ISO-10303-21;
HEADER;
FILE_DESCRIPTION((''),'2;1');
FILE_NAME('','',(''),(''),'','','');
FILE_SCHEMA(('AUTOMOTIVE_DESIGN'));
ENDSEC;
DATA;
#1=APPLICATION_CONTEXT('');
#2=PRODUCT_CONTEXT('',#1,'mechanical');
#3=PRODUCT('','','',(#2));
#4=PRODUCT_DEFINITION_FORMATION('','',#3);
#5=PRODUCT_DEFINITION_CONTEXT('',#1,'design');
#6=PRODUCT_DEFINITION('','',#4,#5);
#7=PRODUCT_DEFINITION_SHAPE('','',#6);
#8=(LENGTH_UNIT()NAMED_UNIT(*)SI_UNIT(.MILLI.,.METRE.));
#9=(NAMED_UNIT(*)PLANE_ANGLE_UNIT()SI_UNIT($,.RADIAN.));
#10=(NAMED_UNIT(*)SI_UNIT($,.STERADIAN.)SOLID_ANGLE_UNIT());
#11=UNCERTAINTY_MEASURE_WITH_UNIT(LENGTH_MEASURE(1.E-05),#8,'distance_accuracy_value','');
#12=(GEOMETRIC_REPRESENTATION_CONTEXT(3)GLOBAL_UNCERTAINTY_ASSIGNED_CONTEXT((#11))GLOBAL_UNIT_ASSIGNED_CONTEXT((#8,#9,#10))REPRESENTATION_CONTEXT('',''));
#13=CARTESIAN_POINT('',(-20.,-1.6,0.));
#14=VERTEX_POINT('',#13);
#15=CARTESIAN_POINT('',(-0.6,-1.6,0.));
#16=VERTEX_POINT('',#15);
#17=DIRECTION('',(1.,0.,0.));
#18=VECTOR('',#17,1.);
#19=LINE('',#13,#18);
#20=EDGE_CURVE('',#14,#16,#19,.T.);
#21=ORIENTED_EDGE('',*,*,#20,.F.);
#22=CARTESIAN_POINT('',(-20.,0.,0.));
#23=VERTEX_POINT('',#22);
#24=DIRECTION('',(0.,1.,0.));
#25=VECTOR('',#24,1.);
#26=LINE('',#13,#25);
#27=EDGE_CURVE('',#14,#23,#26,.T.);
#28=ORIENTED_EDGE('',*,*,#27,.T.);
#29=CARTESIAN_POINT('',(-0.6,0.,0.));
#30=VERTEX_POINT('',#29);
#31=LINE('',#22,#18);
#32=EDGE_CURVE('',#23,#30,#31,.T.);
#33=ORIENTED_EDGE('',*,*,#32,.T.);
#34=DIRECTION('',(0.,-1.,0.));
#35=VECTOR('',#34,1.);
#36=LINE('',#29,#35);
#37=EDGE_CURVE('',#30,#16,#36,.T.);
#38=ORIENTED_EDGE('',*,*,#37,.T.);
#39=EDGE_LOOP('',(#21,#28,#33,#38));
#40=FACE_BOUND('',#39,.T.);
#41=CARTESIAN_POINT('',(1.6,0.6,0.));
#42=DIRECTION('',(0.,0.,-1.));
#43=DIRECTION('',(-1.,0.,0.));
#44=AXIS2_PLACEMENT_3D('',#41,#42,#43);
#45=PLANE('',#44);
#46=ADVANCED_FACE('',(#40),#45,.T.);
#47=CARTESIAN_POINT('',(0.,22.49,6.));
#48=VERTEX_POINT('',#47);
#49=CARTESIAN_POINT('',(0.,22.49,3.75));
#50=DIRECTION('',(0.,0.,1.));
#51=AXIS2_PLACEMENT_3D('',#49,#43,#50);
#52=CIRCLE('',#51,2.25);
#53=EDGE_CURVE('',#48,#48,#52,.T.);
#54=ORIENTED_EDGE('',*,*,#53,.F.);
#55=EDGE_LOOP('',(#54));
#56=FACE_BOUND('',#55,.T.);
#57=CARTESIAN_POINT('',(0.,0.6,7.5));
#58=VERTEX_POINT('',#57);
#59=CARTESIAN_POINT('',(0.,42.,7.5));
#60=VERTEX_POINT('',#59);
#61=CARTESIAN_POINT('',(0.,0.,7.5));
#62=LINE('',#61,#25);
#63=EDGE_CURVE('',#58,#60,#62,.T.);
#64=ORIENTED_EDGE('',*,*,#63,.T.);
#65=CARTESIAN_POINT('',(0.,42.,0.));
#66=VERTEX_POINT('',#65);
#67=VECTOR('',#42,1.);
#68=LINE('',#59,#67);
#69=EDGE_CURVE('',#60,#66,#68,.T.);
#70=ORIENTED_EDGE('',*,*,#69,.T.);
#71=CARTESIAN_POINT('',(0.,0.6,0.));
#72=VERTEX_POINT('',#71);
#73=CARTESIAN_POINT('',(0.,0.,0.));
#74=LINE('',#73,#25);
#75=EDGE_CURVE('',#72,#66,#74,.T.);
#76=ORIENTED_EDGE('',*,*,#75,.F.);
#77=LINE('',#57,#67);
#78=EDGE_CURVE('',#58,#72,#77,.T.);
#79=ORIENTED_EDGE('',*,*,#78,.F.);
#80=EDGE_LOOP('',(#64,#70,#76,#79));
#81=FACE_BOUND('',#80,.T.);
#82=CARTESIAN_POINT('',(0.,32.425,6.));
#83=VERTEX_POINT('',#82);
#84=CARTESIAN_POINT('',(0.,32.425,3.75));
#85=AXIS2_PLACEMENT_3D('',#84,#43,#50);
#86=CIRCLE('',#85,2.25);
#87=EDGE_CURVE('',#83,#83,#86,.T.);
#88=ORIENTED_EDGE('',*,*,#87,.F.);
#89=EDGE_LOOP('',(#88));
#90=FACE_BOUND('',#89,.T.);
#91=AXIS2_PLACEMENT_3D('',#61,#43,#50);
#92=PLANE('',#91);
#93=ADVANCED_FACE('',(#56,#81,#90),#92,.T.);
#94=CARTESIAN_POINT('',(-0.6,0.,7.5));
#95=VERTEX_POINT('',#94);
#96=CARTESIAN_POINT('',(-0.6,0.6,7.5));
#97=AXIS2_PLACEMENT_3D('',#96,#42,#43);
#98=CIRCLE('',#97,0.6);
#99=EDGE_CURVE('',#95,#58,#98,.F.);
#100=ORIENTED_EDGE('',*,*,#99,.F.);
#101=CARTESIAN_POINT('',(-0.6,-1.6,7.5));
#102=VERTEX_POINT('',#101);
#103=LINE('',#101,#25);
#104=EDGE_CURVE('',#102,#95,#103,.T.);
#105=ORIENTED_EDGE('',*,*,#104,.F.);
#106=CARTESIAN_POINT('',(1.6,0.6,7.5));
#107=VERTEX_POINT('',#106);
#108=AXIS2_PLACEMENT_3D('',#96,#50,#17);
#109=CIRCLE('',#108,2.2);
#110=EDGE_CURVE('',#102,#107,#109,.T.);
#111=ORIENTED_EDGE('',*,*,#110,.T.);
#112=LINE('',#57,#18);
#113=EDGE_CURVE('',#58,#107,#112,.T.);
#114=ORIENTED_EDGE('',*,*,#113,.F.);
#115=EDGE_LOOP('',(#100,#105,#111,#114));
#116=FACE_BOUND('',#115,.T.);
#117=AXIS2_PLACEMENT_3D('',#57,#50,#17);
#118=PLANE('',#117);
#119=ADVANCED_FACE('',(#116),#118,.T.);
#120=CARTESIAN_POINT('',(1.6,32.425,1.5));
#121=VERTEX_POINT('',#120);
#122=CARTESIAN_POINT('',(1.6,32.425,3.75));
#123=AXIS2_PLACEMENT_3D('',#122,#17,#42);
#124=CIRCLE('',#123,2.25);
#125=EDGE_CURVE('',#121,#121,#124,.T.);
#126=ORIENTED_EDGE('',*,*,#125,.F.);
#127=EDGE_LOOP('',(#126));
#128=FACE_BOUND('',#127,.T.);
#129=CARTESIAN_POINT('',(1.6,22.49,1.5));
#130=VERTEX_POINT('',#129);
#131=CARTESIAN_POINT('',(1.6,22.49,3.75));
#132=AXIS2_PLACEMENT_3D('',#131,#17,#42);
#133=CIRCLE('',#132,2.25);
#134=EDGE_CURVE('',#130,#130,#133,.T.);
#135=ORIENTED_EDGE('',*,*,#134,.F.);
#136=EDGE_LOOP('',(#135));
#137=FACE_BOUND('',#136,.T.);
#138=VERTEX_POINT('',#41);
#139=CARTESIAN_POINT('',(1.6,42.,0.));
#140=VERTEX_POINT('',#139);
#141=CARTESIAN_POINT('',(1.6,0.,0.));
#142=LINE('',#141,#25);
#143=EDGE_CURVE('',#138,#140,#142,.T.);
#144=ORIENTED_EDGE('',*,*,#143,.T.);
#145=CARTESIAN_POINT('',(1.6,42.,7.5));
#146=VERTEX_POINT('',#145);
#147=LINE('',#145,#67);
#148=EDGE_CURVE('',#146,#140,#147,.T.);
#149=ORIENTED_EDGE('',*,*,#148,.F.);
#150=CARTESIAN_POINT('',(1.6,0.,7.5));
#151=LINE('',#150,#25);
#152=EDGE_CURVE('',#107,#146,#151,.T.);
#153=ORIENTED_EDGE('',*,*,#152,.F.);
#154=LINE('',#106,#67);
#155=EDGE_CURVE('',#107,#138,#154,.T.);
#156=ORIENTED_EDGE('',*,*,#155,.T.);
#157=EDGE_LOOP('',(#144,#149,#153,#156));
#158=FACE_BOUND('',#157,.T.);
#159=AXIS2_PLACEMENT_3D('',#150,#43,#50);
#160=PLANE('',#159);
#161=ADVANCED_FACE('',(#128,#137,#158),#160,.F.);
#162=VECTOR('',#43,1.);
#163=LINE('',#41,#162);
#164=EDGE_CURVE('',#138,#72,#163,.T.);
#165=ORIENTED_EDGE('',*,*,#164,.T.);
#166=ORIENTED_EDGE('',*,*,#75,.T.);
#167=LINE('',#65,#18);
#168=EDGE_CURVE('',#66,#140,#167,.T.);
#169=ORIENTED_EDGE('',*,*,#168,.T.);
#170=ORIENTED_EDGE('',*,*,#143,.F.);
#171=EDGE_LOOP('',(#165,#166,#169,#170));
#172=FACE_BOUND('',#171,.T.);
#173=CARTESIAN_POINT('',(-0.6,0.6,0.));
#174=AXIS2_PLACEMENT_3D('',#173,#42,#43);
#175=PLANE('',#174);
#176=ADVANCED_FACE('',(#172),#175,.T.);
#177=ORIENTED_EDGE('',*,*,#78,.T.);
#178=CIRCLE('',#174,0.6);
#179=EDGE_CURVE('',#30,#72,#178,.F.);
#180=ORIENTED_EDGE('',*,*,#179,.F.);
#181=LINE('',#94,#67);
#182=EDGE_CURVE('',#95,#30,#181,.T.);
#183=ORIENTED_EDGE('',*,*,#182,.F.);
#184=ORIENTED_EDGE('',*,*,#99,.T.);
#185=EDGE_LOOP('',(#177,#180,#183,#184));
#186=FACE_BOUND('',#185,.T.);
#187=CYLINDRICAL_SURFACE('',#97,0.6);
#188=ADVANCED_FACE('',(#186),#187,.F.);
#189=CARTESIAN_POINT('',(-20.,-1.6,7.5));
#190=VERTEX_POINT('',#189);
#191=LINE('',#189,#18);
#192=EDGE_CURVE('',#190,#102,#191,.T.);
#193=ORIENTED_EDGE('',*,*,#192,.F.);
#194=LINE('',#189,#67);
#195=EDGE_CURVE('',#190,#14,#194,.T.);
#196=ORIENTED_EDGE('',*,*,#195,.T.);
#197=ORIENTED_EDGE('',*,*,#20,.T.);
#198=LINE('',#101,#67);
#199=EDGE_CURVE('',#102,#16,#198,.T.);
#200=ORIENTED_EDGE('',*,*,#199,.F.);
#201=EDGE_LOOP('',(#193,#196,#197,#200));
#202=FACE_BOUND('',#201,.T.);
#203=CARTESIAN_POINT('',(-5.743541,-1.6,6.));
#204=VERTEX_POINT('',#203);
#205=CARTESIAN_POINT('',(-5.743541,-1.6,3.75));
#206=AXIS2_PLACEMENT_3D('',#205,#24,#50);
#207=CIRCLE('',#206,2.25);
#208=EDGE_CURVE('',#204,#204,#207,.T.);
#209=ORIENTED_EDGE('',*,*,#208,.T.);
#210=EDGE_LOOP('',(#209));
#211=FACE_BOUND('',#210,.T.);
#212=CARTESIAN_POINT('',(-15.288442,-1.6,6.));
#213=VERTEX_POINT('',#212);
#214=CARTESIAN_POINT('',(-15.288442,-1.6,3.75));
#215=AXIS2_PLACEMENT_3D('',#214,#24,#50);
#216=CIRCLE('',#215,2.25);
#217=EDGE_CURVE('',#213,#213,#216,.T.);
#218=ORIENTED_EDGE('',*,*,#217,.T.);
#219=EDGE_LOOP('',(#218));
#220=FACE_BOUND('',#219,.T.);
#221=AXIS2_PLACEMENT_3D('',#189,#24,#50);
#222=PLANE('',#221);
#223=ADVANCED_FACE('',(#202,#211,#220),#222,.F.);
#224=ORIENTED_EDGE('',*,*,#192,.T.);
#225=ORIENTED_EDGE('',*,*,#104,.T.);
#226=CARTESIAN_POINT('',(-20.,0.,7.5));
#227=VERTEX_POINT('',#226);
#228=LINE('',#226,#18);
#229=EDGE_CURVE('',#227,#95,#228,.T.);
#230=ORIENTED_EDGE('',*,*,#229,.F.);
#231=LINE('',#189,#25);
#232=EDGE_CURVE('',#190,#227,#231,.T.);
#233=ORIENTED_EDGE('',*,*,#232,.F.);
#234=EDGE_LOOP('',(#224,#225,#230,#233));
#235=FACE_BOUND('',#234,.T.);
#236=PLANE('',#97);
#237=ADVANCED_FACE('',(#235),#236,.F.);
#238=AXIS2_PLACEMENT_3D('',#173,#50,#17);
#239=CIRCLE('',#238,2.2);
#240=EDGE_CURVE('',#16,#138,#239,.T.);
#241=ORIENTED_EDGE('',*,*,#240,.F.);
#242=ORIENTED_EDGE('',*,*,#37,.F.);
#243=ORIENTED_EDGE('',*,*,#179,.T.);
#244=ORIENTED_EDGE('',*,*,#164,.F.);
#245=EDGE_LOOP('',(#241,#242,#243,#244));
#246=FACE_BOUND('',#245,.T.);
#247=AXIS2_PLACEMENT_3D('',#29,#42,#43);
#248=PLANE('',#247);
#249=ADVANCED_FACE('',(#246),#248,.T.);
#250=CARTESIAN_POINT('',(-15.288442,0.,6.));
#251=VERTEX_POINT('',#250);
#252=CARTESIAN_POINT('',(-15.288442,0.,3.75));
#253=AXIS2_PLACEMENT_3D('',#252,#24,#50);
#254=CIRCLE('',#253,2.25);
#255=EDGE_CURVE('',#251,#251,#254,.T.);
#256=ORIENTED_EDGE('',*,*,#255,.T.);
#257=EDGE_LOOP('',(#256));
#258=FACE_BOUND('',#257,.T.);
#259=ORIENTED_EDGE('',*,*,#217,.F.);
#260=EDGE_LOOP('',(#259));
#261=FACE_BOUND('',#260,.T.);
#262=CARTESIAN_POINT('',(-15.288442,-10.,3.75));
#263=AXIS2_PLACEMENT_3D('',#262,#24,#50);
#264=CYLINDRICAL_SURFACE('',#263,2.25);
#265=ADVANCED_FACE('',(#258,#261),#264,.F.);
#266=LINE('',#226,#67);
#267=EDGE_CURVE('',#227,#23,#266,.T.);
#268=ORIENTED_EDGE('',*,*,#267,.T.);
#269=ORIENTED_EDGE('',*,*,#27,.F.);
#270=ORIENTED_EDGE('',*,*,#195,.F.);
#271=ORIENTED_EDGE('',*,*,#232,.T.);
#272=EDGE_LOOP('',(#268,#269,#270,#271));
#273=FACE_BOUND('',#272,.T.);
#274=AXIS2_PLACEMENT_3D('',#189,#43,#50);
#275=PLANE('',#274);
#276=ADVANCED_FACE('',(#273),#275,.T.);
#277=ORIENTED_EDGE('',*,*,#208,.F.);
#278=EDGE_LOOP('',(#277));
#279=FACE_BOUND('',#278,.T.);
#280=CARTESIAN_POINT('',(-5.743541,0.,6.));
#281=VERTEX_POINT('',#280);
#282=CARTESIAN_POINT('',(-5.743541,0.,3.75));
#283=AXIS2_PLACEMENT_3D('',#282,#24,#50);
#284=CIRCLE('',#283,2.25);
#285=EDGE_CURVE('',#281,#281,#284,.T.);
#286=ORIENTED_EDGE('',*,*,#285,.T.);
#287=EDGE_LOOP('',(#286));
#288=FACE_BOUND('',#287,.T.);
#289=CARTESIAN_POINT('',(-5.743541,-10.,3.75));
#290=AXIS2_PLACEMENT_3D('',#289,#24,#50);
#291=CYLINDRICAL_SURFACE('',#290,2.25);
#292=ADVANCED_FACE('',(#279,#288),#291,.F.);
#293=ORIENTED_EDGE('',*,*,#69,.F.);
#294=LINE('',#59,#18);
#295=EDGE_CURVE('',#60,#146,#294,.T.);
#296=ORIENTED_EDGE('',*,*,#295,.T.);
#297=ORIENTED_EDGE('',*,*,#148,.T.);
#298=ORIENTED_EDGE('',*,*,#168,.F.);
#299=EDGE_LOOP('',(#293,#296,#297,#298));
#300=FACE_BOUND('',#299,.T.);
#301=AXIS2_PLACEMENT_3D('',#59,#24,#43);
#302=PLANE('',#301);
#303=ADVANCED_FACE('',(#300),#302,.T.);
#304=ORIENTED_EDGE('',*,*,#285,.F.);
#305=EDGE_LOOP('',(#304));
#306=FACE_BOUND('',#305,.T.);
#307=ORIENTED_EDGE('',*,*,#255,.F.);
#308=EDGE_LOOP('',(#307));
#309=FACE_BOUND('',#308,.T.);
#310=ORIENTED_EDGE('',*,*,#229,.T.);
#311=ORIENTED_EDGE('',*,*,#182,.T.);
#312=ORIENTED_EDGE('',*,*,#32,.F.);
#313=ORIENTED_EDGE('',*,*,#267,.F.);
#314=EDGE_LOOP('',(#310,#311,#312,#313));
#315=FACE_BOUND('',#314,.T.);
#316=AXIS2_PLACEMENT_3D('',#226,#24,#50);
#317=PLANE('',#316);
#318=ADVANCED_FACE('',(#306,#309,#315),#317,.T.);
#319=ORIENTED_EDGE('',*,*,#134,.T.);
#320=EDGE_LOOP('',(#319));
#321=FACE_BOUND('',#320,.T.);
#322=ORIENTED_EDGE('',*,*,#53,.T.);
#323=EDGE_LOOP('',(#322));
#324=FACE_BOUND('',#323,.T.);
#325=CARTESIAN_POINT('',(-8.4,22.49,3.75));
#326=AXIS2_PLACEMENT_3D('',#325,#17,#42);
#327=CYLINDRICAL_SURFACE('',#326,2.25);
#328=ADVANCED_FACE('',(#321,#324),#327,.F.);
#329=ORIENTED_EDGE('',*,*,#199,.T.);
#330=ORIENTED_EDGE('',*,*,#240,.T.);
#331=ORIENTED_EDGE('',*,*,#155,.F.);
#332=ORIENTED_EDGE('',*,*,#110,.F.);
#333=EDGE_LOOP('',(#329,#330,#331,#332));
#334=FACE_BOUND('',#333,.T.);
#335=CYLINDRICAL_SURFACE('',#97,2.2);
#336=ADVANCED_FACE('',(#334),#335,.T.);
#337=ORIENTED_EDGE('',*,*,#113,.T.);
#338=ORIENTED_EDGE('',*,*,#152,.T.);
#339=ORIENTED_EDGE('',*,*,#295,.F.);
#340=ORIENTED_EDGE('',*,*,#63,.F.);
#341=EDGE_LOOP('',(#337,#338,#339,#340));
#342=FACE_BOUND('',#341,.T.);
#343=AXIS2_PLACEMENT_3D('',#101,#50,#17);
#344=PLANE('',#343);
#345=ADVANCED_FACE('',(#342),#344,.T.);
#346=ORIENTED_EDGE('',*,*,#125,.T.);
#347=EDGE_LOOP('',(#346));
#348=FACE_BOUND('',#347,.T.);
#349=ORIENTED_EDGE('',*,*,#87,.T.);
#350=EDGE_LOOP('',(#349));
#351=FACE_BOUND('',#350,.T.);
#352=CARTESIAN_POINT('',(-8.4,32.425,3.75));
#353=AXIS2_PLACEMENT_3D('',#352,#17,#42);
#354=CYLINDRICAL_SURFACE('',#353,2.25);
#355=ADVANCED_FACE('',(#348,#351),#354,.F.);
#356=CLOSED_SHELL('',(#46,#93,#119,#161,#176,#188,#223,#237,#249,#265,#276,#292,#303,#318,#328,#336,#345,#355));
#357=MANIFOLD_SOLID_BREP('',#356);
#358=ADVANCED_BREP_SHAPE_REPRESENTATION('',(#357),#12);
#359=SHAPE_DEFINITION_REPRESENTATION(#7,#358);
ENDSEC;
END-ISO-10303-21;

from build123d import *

# Parameters (mm, degrees)
BASE_FLANGE1_DEPTH = 7.5
SKETCH7_R          = 2.25
CUT_EXTRUDE1_DEPTH = 10
SKETCH8_R          = 2.25
CUT_EXTRUDE2_DEPTH = 10


# Sheet-metal steps are written as plain solids
with BuildPart() as part:
    # Sketch1 → Base-Flange1 (new body)
    with BuildSketch(Plane.XY):
        with BuildLine():
            Line((-20, 0), (-0.6, 0))
            ThreePointArc((-0.6, 0), (-0.175735931, 0.175735931), (0, 0.6))
            Line((0, 0.6), (0, 42))
            Line((0, 42), (1.6, 42))
            Line((1.6, 42), (1.6, 0.6))
            ThreePointArc((1.6, 0.6), (0.955634919, -0.955634919), (-0.6, -1.6))
            Line((-0.6, -1.6), (-20, -1.6))
            Line((-20, -1.6), (-20, 0))
        make_face()
    extrude(amount=BASE_FLANGE1_DEPTH)

    # Sketch7 → Cut-Extrude1 (cut)
    with BuildSketch(Plane(origin=(1.6, 0, 0), x_dir=(0, 0, -1), z_dir=(1, 0, 0))):
        with Locations((-3.75, 32.425)):
            Circle(SKETCH7_R)
        with Locations((-3.75, 22.49)):
            Circle(SKETCH7_R)
    extrude(amount=-CUT_EXTRUDE1_DEPTH, mode=Mode.SUBTRACT)

    # Sketch8 → Cut-Extrude2 (cut)
    with BuildSketch(Plane(origin=(0, 0, 0), x_dir=(1, 0, 0), z_dir=(0, 1, 0))):
        with Locations(Location((-15.288441883, -3.75, 0), (0, 0, 270))):
            Circle(SKETCH8_R)
        with Locations(Location((-5.743540806, -3.75, 0), (0, 0, 270))):
            Circle(SKETCH8_R)
    extrude(amount=-CUT_EXTRUDE2_DEPTH, mode=Mode.SUBTRACT)


solid = part.part
